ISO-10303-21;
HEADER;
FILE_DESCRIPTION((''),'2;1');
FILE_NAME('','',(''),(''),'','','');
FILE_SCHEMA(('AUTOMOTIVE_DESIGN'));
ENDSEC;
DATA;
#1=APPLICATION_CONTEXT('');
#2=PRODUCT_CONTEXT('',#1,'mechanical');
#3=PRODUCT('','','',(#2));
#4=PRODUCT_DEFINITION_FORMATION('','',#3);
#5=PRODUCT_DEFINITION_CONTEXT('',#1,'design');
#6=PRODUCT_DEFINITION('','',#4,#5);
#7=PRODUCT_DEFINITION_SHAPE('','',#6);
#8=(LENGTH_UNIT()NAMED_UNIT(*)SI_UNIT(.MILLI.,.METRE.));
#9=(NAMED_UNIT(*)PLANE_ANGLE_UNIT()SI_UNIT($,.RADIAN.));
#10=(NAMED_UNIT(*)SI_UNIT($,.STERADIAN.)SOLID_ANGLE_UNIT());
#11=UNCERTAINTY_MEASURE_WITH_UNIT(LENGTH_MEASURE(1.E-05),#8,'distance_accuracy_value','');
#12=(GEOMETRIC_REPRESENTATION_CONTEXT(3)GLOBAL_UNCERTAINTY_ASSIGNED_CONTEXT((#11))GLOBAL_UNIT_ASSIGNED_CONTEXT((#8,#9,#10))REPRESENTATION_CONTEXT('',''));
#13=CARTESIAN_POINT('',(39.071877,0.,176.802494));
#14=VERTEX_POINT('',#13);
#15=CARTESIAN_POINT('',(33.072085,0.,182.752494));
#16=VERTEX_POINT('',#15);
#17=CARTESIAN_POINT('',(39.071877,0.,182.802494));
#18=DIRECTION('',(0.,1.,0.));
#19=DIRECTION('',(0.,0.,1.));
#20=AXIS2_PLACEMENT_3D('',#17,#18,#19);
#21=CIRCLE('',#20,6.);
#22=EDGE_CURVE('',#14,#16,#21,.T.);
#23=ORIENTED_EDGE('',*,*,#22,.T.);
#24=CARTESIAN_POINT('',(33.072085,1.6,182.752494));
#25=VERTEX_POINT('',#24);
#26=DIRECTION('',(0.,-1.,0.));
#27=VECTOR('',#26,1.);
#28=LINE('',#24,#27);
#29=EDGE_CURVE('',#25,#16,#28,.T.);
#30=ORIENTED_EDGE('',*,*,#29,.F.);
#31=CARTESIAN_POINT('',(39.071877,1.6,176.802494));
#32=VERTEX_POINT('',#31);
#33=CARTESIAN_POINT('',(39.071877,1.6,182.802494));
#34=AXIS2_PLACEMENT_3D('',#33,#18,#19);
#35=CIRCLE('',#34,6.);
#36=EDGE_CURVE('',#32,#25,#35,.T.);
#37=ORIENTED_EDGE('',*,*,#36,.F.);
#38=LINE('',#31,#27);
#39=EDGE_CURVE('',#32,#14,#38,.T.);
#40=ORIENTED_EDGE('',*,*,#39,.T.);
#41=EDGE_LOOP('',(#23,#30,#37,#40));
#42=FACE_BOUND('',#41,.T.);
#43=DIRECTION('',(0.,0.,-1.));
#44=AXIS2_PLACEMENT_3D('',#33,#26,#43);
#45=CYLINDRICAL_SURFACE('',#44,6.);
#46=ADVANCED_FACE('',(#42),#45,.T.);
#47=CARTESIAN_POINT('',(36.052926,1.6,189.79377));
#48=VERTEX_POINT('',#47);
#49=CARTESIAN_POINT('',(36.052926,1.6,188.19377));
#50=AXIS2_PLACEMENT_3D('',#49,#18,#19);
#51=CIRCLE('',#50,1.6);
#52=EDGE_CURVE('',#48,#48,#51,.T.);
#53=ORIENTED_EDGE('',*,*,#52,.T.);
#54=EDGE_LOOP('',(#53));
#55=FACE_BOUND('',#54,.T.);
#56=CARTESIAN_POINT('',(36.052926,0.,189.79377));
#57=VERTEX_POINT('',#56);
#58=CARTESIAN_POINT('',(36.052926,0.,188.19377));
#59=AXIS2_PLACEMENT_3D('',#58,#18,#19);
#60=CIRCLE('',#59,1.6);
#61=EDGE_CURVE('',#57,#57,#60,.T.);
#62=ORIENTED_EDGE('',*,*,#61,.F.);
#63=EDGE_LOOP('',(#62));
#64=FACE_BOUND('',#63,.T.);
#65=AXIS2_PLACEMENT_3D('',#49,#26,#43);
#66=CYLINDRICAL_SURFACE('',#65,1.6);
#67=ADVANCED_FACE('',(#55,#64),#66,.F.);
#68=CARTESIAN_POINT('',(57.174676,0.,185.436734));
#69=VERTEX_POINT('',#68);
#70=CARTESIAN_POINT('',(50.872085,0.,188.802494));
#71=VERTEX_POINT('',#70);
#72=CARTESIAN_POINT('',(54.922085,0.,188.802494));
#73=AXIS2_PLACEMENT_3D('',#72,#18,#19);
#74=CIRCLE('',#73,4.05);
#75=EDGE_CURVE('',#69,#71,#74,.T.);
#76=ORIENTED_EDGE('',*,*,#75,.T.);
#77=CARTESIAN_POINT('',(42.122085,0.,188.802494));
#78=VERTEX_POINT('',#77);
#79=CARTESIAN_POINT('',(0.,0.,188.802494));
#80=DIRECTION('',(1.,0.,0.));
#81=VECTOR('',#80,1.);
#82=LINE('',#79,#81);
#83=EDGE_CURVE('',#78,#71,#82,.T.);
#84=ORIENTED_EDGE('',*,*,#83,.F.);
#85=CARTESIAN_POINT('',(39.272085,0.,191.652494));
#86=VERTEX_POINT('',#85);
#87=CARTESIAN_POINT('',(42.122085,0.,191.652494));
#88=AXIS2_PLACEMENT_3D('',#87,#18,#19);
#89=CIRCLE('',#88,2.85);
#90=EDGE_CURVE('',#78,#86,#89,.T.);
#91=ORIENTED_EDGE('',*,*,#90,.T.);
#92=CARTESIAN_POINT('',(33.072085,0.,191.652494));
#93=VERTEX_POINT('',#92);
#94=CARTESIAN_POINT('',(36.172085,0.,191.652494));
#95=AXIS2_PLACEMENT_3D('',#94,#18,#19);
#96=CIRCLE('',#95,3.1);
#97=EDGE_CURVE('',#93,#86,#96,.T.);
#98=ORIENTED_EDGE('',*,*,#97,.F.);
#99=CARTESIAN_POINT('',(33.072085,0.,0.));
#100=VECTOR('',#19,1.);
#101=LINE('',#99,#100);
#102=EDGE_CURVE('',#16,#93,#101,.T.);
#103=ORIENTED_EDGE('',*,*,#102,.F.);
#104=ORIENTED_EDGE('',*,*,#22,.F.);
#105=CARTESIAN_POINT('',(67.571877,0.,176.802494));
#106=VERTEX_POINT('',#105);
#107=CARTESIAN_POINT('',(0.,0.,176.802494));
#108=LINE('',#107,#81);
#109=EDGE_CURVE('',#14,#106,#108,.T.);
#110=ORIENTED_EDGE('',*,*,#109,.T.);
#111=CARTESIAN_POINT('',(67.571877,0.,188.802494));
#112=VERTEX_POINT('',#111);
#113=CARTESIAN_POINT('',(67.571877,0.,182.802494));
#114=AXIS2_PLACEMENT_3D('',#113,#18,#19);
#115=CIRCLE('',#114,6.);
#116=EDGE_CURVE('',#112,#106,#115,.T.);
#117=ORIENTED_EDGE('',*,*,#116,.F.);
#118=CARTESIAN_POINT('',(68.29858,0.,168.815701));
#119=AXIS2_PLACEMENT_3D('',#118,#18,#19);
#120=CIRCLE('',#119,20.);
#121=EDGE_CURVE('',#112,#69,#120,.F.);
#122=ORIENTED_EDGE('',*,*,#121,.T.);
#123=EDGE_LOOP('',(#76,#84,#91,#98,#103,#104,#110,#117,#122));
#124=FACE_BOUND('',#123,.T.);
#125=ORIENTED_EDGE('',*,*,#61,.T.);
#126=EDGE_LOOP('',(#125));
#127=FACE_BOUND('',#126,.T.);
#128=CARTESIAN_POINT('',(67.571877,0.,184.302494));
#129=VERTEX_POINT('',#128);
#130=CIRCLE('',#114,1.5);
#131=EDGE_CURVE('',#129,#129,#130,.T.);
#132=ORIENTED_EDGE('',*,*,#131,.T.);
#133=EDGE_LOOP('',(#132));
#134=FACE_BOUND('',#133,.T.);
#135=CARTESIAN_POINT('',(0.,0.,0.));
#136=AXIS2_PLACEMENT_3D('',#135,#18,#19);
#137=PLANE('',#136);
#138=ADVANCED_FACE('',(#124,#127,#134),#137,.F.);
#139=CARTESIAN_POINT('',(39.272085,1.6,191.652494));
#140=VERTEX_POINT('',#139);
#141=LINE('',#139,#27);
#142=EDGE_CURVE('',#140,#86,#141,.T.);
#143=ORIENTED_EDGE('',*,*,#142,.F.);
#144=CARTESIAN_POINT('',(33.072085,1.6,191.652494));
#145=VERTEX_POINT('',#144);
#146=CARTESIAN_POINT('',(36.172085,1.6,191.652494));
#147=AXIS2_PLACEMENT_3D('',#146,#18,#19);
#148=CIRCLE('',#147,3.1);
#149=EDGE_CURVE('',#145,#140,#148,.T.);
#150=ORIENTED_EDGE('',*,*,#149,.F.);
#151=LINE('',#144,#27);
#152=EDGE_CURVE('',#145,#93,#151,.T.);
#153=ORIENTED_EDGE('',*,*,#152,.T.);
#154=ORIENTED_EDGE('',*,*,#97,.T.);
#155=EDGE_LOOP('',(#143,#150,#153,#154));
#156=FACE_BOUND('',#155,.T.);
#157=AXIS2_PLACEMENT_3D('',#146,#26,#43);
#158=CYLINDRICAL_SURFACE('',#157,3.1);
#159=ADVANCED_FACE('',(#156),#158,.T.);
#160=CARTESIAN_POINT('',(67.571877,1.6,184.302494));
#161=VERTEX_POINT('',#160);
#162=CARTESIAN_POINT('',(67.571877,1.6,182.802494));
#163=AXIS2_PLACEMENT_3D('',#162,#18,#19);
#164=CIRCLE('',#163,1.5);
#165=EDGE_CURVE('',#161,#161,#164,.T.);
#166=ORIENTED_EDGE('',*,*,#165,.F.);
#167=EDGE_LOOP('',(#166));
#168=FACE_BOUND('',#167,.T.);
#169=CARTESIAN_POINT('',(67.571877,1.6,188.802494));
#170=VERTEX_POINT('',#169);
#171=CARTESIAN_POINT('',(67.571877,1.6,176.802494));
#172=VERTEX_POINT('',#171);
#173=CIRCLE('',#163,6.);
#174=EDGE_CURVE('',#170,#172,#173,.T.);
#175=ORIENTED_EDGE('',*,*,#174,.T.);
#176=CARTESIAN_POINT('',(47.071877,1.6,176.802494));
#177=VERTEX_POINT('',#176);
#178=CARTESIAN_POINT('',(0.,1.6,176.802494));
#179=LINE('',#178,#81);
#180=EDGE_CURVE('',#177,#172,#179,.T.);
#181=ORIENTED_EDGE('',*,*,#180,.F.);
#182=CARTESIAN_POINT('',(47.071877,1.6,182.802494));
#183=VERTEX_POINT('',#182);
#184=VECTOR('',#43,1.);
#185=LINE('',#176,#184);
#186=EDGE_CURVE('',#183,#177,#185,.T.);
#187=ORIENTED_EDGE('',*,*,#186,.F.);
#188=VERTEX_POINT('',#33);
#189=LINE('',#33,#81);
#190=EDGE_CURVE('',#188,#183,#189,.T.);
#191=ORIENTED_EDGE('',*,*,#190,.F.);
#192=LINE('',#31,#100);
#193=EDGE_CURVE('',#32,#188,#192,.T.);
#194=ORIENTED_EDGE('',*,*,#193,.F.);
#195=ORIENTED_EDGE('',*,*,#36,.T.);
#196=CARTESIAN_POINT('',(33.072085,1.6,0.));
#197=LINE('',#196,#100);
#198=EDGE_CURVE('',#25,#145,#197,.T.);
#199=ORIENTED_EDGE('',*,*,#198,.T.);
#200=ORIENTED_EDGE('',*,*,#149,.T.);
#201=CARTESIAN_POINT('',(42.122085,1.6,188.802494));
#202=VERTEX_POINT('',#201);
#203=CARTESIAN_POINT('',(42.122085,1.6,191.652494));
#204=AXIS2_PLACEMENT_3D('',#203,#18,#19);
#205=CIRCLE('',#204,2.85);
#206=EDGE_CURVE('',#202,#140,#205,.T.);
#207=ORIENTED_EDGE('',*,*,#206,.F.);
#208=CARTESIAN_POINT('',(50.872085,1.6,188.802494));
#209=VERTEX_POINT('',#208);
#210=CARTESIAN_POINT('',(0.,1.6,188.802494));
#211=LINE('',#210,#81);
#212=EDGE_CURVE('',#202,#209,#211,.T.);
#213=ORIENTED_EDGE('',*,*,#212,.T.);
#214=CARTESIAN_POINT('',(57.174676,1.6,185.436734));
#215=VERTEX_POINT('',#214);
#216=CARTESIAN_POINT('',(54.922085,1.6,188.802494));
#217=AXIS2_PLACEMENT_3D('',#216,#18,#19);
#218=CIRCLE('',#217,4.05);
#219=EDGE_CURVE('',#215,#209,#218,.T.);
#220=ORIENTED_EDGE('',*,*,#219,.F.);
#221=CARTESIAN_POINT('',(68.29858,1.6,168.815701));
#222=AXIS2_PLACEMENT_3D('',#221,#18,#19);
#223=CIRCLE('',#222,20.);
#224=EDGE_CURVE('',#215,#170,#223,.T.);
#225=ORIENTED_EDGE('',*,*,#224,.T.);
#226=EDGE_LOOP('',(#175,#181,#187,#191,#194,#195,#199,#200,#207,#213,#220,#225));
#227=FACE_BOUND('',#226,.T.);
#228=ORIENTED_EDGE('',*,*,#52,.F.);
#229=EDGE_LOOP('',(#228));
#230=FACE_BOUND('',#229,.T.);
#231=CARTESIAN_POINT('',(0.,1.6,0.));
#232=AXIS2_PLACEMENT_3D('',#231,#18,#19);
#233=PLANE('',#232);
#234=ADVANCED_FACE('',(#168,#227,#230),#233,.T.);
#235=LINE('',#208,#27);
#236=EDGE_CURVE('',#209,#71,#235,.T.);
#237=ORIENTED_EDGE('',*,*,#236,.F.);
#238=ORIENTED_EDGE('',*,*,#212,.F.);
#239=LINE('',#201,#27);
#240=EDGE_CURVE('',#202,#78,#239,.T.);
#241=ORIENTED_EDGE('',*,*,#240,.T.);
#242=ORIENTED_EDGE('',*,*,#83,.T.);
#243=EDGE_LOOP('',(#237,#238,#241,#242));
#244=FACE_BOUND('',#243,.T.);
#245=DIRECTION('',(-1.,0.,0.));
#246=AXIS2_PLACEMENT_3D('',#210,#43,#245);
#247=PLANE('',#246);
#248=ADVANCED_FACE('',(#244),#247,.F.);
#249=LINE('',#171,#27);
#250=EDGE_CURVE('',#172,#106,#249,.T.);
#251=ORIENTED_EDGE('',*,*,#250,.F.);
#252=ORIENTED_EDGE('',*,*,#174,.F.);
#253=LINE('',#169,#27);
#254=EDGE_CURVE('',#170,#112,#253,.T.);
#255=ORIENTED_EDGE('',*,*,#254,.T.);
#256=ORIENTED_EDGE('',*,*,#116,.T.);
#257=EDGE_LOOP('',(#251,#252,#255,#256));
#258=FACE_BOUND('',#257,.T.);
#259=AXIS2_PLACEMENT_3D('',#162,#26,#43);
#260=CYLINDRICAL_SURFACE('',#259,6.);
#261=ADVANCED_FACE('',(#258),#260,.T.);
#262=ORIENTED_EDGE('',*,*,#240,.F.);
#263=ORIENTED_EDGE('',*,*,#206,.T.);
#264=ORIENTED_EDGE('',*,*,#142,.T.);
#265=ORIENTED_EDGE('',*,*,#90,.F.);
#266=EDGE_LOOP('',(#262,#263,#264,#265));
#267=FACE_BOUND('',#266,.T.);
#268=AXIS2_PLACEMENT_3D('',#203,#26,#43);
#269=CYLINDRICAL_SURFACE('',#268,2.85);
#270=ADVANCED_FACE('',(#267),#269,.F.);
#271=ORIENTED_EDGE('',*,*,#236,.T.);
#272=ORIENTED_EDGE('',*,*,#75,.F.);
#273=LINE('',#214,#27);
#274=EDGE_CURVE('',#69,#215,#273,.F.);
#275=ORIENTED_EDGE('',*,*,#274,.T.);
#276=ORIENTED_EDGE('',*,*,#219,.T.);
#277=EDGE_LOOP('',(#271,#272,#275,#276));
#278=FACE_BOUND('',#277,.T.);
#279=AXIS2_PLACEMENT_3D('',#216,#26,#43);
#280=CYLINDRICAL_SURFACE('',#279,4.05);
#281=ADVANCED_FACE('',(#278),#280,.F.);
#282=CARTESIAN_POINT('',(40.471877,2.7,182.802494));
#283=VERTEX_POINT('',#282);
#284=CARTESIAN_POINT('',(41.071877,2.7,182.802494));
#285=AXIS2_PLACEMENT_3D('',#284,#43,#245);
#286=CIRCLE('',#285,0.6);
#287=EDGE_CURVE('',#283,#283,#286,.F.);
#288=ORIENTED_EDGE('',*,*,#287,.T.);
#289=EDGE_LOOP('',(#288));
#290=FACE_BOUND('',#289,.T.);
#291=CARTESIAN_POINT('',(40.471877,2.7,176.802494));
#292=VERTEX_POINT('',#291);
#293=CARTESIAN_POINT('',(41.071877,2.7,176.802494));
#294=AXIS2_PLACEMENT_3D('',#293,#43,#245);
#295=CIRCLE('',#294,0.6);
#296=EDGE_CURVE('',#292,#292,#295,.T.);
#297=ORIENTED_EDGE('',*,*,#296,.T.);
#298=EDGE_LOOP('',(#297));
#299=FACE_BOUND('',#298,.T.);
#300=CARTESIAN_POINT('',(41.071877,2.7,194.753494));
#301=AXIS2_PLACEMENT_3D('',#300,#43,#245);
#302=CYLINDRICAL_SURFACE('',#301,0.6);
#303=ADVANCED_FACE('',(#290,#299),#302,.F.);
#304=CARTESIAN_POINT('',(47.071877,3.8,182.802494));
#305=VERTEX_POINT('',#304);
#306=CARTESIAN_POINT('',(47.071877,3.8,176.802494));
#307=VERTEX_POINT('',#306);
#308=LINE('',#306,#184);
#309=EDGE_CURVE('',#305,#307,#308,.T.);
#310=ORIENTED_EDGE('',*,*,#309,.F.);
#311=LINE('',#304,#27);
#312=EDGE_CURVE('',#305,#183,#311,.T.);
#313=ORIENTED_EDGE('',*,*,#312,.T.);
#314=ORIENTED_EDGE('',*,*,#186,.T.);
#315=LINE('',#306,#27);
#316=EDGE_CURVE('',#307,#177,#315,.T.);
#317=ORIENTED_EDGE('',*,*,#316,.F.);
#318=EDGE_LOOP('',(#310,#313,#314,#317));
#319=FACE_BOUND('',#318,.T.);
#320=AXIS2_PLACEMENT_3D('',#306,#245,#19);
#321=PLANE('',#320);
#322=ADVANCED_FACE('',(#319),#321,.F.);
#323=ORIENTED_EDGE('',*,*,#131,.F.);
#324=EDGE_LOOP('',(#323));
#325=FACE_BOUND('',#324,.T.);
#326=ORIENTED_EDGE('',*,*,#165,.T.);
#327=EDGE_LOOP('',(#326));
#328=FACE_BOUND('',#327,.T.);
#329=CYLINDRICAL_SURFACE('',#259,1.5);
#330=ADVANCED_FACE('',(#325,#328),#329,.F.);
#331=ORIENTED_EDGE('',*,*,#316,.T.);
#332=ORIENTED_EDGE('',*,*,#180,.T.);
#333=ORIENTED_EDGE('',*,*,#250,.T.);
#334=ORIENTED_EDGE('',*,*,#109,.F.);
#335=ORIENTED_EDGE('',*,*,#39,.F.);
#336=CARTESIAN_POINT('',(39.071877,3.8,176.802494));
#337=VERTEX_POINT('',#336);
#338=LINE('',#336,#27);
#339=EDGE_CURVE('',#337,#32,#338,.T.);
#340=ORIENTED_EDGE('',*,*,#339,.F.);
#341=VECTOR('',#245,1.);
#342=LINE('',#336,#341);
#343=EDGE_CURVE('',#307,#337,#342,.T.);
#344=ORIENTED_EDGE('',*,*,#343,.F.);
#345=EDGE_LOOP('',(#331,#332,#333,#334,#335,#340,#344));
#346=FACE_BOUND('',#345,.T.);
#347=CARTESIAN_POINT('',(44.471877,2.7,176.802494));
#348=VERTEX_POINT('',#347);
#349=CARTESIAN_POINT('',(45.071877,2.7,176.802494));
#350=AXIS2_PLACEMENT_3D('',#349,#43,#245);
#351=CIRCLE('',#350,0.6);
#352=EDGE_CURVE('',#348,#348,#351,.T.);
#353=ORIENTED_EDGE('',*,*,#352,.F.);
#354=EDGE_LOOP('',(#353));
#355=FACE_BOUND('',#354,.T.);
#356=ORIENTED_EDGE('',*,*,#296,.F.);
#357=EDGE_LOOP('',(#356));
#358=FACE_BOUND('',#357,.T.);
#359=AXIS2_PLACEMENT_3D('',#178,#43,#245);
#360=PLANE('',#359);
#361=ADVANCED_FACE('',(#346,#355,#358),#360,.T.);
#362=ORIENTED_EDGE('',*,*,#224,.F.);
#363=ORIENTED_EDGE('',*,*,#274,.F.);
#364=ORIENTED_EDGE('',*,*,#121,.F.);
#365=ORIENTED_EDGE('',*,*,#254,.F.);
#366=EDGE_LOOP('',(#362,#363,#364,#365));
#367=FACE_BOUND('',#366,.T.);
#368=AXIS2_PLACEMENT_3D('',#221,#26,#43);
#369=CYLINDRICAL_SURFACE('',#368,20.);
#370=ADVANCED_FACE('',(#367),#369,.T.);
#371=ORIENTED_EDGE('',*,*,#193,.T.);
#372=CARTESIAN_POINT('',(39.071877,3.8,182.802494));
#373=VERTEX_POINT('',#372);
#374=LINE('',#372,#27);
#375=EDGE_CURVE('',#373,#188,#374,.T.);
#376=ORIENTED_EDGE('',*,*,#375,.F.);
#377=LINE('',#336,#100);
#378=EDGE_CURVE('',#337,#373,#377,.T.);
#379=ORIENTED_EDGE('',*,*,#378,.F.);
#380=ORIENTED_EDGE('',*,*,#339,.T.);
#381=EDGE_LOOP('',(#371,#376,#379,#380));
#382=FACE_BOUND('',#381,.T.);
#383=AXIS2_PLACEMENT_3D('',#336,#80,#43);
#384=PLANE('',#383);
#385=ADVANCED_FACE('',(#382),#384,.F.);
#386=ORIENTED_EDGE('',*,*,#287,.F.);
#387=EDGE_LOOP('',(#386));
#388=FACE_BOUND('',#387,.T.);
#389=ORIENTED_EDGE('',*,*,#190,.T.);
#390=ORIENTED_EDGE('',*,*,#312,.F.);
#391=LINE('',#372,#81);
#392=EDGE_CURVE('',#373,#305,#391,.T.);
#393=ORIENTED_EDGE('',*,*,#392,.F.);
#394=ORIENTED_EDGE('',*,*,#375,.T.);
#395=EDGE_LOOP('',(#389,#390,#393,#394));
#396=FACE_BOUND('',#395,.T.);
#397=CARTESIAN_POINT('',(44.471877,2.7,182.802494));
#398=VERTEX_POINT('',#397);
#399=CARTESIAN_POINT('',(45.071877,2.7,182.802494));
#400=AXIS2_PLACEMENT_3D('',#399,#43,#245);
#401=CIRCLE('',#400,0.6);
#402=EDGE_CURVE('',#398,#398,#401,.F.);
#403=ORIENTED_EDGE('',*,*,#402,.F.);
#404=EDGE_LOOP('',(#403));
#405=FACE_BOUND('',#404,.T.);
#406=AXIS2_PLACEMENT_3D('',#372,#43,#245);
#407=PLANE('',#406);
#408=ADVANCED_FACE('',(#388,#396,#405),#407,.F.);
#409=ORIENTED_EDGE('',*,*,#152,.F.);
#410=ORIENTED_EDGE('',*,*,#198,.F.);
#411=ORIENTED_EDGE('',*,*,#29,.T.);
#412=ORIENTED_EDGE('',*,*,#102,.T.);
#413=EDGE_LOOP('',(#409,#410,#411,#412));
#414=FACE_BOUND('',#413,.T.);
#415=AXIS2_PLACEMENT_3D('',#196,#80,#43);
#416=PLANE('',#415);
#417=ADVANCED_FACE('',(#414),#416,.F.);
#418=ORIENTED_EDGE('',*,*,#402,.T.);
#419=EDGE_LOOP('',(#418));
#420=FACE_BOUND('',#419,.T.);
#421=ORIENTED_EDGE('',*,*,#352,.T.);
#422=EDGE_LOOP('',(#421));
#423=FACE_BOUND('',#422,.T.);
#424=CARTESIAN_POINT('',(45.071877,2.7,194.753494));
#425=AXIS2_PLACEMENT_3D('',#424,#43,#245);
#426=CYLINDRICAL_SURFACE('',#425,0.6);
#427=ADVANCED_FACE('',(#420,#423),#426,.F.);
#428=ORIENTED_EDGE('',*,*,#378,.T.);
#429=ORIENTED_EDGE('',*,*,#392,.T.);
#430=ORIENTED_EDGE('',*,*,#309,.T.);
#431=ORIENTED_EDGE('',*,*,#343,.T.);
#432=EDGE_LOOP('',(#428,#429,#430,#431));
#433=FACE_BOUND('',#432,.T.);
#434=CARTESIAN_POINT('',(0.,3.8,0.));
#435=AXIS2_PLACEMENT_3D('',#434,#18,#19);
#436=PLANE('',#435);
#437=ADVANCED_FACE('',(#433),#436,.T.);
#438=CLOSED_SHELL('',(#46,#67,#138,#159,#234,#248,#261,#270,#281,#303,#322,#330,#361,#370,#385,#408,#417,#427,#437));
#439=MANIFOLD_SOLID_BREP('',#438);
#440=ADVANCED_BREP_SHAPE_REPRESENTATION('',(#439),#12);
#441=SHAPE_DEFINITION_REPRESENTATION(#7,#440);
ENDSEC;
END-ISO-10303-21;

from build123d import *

# Parameters (mm, degrees)
SKETCH1_R           = 1.5
SKETCH1_R_2         = 1.6
BOSS_EXTRUDE1_DEPTH = 1.6
SKETCH2_W           = 8
SKETCH2_H           = 6
BOSS_EXTRUDE2_DEPTH = 2.2
CUT_EXTRUDE1_REACH  = 77.825
SKETCH3_R           = 0.6
FILLET1_R           = 20


with BuildPart() as part:
    # Sketch1 → Boss-Extrude1 (new body)
    with BuildSketch(Plane(origin=(0, 0, 0), x_dir=(1, 0, 0), z_dir=(0, 1, 0))):
        with BuildLine():
            Line((33.072085441, -182.752493772), (33.072085441, -191.652493772))
            ThreePointArc((33.072085441, -191.652493772), (36.172085441, -194.752493772), (39.272085441, -191.652493772))
            ThreePointArc((39.272085441, -191.652493772), (40.106831114, -189.637239445), (42.122085441, -188.802493772))
            Line((42.122085441, -188.802493772), (50.872085441, -188.802493772))
            ThreePointArc((50.872085441, -188.802493772), (54.922085441, -184.752493772), (58.972085441, -188.802493772))
            Line((58.972085441, -188.802493772), (67.571877104, -188.802493772))
            ThreePointArc((67.571877104, -188.802493772), (73.571877104, -182.802493772), (67.571877104, -176.802493772))
            Line((67.571877104, -176.802493772), (39.071877104, -176.802493772))
            ThreePointArc((39.071877104, -176.802493772), (34.846951069, -178.542212091), (33.072085441, -182.752493772))
        make_face()
        with Locations(Location((67.571877104, -182.802493772, 0), (0, 0, 270))):
            Circle(SKETCH1_R, mode=Mode.SUBTRACT)
        with Locations(Location((36.052926365, -188.193770201, 0), (0, 0, 270))):
            Circle(SKETCH1_R_2, mode=Mode.SUBTRACT)
    extrude(amount=BOSS_EXTRUDE1_DEPTH)

    # Sketch2 → Boss-Extrude2 (add)
    with BuildSketch(Plane(origin=(0, 1.6, 0), x_dir=(1, 0, 0), z_dir=(0, 1, 0))):
        with Locations((43.071877104, -179.802493772)):
            Rectangle(SKETCH2_W, SKETCH2_H)
    extrude(amount=BOSS_EXTRUDE2_DEPTH)

    # Sketch3 → Cut-Extrude1 (cut, up to next)
    with BuildSketch(Plane(origin=(0, 0, 176.802493772), x_dir=(-1, 0, 0), z_dir=(0, 0, -1)), mode=Mode.PRIVATE) as cut_extrude1_sk1:
        with Locations((-45.071877104, 2.7)):
            Circle(SKETCH3_R)
    cut_extrude1_tool1 = extrude(cut_extrude1_sk1.sketch, amount=-CUT_EXTRUDE1_REACH, mode=Mode.PRIVATE) & part.part
    # Sketch3 → Cut-Extrude1 (cut, up to next)
    with BuildSketch(Plane(origin=(0, 0, 176.802493772), x_dir=(-1, 0, 0), z_dir=(0, 0, -1)), mode=Mode.PRIVATE) as cut_extrude1_sk2:
        with Locations((-41.071877104, 2.7)):
            Circle(SKETCH3_R)
    cut_extrude1_tool2 = extrude(cut_extrude1_sk2.sketch, amount=-CUT_EXTRUDE1_REACH, mode=Mode.PRIVATE) & part.part
    add(cut_extrude1_tool1.solids().sort_by_distance((45.071877, 2.7, 176.802494))[0], mode=Mode.SUBTRACT)
    add(cut_extrude1_tool2.solids().sort_by_distance((41.071877, 2.7, 176.802494))[0], mode=Mode.SUBTRACT)

    # Fillet1
    # the kernel refuses this fillet: 20 mm, written as the material it takes off along each edge
    with BuildSketch(Plane(origin=(58.972085441, -21.499479158, 188.802493772), x_dir=(-0.47106518434260986, 0, -0.8820984027308195), z_dir=(0, 1, 0))) as fillet1_piece_1:
        with BuildLine():
            CenterArc((13.23693168, -17.641968055), FILLET1_R, 118.103462193, 31.710767892)
            Line((-4.051062445, -7.58586249), (0, 0))
            ThreePointArc((0, 0), (1.907813997, -0.477501469), (3.815627993, 0))
        make_face()
    extrude(amount=44.598958315, mode=Mode.SUBTRACT)


solid = part.part
